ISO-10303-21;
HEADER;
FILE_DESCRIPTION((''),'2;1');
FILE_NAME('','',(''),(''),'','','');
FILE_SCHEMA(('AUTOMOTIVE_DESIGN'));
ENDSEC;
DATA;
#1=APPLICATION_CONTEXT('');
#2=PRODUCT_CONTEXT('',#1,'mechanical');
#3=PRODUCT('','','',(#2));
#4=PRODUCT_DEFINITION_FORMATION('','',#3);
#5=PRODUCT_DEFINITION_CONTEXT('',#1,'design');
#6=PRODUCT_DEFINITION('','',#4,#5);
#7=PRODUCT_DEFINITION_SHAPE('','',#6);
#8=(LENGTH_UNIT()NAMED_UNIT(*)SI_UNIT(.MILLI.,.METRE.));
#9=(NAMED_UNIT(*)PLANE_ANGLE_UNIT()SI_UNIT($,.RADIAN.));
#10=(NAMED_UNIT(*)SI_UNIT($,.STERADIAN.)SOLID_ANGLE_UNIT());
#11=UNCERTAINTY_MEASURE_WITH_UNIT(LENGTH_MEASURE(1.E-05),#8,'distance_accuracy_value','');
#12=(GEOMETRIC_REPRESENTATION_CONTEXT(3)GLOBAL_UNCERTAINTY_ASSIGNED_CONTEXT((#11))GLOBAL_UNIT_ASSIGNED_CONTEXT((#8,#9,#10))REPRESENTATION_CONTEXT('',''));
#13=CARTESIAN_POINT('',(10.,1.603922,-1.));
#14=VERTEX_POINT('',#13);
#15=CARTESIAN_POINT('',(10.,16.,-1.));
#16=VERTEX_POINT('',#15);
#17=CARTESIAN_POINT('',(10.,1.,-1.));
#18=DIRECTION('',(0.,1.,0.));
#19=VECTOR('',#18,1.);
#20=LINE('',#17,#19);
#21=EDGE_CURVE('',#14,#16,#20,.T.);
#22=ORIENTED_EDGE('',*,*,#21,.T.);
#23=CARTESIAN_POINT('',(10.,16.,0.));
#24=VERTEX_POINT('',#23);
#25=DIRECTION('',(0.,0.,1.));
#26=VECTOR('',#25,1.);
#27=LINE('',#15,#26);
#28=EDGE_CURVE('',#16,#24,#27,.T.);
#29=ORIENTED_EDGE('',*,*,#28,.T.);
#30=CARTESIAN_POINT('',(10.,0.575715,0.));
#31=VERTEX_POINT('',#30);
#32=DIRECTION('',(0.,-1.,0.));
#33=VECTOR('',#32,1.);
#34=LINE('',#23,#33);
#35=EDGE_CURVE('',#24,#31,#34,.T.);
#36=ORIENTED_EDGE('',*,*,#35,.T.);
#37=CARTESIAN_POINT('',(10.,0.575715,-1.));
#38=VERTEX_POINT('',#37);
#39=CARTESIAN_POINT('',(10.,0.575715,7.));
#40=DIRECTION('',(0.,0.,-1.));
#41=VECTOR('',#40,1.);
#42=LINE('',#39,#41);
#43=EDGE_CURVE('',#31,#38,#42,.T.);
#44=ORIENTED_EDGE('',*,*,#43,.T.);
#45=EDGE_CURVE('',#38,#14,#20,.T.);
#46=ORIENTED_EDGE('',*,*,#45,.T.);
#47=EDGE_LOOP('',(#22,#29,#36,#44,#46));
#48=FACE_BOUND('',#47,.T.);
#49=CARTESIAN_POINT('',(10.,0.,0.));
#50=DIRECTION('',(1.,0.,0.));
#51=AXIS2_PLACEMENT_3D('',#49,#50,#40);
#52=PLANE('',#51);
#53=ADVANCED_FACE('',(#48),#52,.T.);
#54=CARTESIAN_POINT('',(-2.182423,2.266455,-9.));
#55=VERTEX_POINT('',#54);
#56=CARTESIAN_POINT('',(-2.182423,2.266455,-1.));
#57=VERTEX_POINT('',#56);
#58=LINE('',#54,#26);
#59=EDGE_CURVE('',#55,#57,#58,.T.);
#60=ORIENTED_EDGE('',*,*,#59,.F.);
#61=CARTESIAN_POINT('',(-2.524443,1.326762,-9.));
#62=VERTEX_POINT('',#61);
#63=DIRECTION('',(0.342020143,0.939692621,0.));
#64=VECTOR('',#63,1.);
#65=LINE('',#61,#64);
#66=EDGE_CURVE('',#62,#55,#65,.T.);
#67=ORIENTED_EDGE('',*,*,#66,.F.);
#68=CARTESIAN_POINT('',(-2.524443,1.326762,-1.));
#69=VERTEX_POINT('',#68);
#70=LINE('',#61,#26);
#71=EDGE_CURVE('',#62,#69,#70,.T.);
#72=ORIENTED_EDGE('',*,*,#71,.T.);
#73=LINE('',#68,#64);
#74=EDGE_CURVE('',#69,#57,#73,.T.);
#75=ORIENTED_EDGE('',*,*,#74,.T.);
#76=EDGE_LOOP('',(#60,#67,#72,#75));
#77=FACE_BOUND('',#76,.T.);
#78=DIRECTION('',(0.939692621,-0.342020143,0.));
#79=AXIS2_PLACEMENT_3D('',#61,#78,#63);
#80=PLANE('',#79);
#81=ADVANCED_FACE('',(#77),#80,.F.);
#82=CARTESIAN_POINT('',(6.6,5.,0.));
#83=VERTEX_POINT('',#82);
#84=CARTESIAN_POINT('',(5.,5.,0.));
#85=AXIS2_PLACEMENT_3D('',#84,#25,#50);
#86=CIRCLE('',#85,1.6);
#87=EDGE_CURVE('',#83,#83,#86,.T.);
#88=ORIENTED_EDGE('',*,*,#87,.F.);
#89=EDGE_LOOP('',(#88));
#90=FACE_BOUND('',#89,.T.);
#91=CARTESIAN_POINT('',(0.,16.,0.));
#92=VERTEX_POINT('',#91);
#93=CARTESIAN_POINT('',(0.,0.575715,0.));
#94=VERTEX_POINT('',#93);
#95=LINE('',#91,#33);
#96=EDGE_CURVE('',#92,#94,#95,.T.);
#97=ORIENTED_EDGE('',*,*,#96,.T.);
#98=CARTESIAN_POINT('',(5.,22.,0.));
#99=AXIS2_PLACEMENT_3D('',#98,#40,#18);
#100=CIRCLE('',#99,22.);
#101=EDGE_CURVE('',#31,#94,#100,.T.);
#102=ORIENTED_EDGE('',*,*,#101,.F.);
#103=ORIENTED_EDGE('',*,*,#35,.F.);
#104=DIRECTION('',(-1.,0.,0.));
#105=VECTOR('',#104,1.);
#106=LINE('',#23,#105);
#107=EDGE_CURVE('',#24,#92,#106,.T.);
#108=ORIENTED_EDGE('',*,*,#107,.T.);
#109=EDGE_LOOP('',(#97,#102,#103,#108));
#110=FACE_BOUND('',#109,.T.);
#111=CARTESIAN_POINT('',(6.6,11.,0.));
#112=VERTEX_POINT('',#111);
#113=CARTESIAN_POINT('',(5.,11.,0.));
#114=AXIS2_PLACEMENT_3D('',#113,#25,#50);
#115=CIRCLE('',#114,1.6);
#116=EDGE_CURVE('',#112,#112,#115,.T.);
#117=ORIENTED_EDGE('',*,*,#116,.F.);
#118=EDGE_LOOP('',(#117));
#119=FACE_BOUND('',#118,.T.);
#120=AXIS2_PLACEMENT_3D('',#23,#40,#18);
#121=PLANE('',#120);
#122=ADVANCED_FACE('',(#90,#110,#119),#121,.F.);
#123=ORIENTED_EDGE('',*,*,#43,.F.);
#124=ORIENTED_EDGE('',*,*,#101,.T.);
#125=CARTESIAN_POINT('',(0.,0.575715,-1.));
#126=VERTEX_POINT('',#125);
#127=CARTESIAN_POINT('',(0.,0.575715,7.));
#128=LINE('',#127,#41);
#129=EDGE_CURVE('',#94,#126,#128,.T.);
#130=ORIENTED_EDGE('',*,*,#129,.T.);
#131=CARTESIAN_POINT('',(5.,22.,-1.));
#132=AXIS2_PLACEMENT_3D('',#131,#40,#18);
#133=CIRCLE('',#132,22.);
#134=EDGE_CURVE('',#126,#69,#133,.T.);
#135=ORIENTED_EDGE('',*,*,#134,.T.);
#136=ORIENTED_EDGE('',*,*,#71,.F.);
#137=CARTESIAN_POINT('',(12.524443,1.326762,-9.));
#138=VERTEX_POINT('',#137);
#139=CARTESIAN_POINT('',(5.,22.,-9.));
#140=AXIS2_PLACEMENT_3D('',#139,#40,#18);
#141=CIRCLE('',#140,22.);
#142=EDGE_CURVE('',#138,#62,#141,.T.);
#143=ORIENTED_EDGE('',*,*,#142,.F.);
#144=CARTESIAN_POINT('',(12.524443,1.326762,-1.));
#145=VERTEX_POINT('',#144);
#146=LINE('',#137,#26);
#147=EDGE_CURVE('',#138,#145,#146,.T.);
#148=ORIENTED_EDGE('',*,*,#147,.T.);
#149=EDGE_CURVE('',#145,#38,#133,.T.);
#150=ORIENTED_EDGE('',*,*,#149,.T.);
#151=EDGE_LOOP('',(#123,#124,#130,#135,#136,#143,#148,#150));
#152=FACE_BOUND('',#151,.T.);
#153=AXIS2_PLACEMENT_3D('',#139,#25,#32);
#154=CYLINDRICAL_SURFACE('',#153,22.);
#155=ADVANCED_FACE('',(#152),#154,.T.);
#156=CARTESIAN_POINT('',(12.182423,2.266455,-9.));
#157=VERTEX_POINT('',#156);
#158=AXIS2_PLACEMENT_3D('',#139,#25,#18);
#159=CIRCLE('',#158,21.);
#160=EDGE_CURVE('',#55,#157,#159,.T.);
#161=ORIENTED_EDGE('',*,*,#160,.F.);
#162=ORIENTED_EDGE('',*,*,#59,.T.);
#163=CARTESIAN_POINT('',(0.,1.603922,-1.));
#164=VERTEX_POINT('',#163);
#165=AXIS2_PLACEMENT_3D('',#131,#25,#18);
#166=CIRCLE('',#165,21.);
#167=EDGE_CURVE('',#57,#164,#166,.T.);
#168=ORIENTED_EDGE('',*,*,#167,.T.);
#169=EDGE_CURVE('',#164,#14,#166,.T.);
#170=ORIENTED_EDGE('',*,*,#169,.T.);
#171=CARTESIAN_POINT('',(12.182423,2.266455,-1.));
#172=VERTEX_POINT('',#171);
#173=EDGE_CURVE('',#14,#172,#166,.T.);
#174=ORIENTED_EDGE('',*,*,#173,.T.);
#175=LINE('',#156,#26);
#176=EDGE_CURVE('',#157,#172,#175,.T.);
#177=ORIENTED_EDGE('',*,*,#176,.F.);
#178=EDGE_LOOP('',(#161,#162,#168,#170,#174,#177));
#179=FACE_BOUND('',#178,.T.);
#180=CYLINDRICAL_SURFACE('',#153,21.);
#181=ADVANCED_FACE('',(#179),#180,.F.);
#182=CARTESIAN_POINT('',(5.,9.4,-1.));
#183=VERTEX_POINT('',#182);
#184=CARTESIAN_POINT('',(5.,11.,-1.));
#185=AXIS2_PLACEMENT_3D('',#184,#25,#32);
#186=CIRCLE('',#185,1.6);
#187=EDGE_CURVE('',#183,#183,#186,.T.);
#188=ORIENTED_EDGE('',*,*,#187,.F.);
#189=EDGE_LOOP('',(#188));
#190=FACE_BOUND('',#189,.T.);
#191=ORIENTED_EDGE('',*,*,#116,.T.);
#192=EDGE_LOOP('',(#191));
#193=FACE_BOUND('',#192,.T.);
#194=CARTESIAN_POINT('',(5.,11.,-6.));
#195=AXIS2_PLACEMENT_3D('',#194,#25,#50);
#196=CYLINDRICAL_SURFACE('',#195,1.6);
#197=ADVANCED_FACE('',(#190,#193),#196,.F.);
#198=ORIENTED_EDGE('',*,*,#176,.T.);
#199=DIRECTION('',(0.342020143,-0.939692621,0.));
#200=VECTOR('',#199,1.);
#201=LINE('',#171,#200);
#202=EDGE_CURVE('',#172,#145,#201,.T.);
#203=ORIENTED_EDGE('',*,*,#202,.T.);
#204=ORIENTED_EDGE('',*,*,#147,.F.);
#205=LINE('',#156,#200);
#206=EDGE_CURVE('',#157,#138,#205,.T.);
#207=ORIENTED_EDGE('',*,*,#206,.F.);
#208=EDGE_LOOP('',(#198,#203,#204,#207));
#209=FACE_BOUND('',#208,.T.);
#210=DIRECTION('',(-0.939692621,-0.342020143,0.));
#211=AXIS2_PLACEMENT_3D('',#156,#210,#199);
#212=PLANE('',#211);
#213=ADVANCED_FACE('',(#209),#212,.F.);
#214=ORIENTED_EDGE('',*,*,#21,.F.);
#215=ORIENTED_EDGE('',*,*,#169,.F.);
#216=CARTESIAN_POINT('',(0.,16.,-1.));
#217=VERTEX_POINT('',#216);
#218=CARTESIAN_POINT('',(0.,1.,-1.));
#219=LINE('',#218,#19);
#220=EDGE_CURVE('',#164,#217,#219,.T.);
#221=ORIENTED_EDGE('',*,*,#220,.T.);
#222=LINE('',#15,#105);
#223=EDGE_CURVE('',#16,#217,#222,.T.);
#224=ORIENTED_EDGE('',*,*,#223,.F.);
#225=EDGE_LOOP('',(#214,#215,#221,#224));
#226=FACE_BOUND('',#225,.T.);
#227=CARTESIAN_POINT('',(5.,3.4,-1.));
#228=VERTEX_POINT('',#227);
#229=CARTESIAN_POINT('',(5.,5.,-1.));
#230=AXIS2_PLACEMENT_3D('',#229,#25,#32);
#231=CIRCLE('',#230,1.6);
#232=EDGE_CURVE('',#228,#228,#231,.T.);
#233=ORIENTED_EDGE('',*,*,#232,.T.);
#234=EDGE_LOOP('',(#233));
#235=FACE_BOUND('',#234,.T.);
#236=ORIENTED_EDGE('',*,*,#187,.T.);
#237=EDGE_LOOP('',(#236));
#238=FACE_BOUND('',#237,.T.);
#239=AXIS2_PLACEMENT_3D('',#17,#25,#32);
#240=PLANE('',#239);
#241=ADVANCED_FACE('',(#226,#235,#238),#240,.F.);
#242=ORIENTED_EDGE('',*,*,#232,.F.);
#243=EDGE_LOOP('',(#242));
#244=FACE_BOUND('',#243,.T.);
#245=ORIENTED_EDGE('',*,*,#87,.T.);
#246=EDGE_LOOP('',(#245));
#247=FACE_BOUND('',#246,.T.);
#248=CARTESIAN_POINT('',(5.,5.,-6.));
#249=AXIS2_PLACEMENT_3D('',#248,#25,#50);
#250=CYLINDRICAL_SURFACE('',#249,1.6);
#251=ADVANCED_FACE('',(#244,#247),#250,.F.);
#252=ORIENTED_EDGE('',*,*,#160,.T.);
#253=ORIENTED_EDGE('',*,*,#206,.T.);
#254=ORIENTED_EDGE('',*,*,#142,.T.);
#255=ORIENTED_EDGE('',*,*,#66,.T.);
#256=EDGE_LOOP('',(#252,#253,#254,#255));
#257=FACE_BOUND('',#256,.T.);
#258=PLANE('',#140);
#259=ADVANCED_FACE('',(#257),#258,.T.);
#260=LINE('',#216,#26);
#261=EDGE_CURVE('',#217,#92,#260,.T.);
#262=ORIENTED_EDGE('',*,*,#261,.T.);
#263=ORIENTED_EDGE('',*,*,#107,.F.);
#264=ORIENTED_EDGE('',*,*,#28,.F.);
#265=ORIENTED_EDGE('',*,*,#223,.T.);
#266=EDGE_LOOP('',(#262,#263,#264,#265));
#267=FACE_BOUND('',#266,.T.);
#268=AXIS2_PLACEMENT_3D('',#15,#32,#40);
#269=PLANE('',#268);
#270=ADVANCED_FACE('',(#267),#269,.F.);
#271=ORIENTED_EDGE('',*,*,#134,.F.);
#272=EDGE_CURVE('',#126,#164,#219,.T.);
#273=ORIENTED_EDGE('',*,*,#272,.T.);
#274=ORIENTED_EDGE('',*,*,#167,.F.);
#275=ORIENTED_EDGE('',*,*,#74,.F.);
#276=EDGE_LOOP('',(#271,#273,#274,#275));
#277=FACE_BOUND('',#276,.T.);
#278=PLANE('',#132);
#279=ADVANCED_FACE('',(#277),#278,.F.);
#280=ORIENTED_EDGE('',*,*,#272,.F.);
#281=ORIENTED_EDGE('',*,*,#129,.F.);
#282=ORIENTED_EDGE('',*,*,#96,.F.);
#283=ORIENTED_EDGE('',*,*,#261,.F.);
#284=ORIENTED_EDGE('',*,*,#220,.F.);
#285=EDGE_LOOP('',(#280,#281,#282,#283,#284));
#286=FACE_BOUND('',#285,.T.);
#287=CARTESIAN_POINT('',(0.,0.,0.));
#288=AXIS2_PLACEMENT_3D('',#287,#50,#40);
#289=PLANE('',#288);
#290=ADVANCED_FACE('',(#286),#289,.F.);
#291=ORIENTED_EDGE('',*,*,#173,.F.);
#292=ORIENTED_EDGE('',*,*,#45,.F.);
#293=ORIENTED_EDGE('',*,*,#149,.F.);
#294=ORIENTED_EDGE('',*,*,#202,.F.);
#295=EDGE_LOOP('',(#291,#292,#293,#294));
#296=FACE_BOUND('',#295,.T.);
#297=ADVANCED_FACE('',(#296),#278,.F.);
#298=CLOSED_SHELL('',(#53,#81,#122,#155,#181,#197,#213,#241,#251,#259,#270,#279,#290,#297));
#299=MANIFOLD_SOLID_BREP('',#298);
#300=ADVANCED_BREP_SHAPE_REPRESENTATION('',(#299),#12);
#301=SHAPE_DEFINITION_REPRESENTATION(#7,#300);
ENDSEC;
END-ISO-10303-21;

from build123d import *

# Parameters (mm, degrees)
EXTRUDE_1_DEPTH     = 10
SKETCH_2_R          = 1.6
CUT_EXTRUDE_1_DEPTH = 20.798989873
SKETCH_4_W          = 10
SKETCH_4_H          = 5
CUT_EXTRUDE_2_DEPTH = 20
EXTRUDE_2_DEPTH     = 8
CUT_EXTRUDE_START   = -1
CUT_EXTRUDE_3_DEPTH = 1


# Read off the part's stored shape, not the designer's step: 除料-伸長3
with BuildPart() as part:
    # 草圖1 → 填料-伸長1 (new body)
    with BuildSketch(Plane(origin=(0, 0, 0), x_dir=(0, 0, -1), z_dir=(1, 0, 0))):
        Polygon((0, 0), (6, 0), (6, 1), (1, 1), (1, 16), (0, 16), align=None)
    extrude(amount=EXTRUDE_1_DEPTH)

    # 草圖2 → 除料-伸長1 (cut, through all)
    with BuildSketch(Plane.XY):
        with Locations((5, 11)):
            Circle(SKETCH_2_R)
        with Locations((5, 5)):
            Circle(SKETCH_2_R)
    extrude(amount=-CUT_EXTRUDE_1_DEPTH, mode=Mode.SUBTRACT)

    # 草圖4 → 除料-伸長2 (cut, through all)
    with BuildSketch(Plane(origin=(0, 1, 0), x_dir=(1, 0, 0), z_dir=(0, 1, 0))):
        with Locations((5, 3.5)):
            Rectangle(SKETCH_4_W, SKETCH_4_H)
    extrude(amount=-CUT_EXTRUDE_2_DEPTH, mode=Mode.SUBTRACT)

    # 草圖5 → 填料-伸長2 (add)
    with BuildSketch(Plane(origin=(0, 0, -1), x_dir=(-1, 0, 0), z_dir=(0, 0, -1))):
        with BuildLine():
            Line((2.524443153, 1.326762343), (2.18242301, 2.266454963))
            ThreePointArc((2.18242301, 2.266454963), (-5, 1), (-12.18242301, 2.266454963))
            Line((-12.18242301, 2.266454963), (-12.524443153, 1.326762343))
            ThreePointArc((-12.524443153, 1.326762343), (-5, 0), (2.524443153, 1.326762343))
        make_face()
    extrude(amount=EXTRUDE_2_DEPTH)

    # 除料-伸長3 outline → 除料-伸長3 (cut)
    with BuildSketch(Plane(origin=(0, 0, -1), x_dir=(-1, 0, 0), z_dir=(0, 0, -1)).offset(CUT_EXTRUDE_START)):
        with BuildLine():
            Line((0, 0), (0, 0.575714714))
            ThreePointArc((0, 0.575714714), (-2.483482164, 0.144402594), (-4.999999936, 0))
            Line((-4.999999936, 0), (0, 0))
        make_face()
        with BuildLine():
            Line((-10, 0), (-4.999999936, 0))
            ThreePointArc((-4.999999936, 0), (-7.516517772, 0.144402587), (-10, 0.575714714))
            Line((-10, 0.575714714), (-10, 0))
        make_face()
    extrude(amount=CUT_EXTRUDE_3_DEPTH, mode=Mode.SUBTRACT)


solid = part.part
